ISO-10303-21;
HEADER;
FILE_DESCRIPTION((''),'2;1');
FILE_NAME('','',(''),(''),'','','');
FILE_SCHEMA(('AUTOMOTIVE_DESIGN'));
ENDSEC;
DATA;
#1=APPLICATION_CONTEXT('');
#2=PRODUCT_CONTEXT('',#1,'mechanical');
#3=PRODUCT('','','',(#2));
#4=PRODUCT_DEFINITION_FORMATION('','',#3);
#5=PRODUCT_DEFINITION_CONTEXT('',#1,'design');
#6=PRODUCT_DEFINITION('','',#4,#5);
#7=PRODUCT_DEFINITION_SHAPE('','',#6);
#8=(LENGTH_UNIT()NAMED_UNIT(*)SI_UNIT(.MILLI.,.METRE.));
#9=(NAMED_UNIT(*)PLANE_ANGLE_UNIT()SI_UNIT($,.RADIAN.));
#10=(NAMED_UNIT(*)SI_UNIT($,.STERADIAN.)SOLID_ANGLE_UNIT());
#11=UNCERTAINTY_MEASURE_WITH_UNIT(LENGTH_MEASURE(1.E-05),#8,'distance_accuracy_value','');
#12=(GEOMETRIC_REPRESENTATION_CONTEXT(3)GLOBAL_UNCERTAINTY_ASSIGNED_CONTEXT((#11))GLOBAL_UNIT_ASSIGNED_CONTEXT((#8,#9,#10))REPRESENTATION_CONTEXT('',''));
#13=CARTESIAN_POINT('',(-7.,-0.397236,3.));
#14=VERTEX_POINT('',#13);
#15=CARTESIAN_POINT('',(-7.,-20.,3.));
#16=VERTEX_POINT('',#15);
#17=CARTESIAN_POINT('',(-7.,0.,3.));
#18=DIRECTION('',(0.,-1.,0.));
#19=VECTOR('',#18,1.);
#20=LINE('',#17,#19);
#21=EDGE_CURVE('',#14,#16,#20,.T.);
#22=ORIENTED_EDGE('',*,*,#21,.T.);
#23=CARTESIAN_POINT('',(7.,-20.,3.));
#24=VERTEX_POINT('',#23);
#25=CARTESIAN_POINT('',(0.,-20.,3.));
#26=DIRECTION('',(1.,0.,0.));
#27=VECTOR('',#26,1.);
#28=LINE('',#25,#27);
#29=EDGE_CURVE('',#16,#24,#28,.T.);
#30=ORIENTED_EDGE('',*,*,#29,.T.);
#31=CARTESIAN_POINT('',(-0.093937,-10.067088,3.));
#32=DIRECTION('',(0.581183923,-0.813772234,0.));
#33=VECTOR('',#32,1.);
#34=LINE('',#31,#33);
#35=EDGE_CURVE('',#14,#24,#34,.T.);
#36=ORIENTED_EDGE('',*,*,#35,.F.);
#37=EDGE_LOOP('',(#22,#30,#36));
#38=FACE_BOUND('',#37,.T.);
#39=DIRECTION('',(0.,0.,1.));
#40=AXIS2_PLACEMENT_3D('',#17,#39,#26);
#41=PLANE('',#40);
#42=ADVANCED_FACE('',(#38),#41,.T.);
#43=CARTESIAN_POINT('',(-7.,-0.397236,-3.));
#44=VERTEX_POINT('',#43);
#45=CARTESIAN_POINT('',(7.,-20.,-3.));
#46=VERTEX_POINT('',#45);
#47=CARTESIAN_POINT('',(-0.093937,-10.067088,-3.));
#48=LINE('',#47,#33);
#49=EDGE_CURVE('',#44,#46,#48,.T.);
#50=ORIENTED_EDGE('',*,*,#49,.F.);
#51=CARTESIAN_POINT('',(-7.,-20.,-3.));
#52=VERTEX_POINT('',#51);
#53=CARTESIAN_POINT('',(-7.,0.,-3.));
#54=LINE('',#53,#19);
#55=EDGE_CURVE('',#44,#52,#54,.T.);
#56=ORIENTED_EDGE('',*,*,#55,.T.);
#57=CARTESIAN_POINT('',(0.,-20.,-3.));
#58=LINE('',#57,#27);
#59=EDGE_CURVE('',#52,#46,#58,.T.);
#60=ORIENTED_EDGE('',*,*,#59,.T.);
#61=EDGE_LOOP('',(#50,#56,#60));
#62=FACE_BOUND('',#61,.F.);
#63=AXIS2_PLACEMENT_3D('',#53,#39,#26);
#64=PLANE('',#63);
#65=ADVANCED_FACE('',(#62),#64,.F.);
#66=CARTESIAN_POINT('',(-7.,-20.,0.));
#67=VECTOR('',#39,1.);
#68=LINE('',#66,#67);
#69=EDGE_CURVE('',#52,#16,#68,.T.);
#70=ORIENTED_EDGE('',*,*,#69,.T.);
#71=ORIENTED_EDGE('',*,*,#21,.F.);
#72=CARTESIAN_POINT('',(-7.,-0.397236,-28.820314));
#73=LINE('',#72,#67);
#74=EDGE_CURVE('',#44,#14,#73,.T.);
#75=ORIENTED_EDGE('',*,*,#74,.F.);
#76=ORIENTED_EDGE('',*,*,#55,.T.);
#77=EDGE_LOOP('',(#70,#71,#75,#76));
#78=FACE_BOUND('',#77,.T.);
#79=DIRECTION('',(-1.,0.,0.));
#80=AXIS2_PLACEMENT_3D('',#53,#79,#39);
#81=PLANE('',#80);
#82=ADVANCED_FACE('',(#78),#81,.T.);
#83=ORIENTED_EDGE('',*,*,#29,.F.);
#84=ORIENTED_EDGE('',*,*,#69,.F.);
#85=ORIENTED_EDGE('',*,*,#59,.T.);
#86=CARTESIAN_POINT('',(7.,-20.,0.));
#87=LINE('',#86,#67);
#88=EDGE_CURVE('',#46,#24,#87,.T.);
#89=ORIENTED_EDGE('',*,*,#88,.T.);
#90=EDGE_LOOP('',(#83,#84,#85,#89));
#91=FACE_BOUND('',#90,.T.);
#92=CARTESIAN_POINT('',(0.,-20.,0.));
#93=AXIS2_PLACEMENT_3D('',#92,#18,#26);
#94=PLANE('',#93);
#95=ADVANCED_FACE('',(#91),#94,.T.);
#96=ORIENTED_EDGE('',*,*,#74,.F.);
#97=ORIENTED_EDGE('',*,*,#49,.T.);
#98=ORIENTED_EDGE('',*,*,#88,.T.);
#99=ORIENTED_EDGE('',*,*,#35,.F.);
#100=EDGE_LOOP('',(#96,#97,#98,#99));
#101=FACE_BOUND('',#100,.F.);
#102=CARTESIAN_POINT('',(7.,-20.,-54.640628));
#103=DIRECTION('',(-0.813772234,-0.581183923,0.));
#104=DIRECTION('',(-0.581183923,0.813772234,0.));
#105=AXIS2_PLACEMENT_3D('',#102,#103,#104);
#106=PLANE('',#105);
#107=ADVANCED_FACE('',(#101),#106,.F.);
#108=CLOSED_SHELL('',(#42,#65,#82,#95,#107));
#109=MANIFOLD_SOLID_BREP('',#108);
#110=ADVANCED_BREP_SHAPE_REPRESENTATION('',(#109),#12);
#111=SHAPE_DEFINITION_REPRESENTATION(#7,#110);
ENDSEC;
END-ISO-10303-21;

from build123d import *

# Parameters (mm, degrees)
F0_W        = 14
F0_H        = 6
F1_DEPTH    = 20
F2_T1_DEPTH = 109.2812557381


# Not quite as in the source:
# - a fillet or chamfer that OpenCascade refuses, or shapes differently, is made with other operations: its cross-section is extruded or revolved along the edge and cut away or added


with BuildPart() as f1:
    # F0 (on Front) → F1 (new body)
    with BuildSketch(Plane.XZ):
        Rectangle(F0_W, F0_H)
    extrude(amount=F1_DEPTH)

    # F2: chamfer of 14.2837 x 20 on 1 edges, made by hand

    # F2_s2 → F2_t1 (cut)
    with BuildSketch(Plane.XY.offset(-54.640627869)):
        Polygon((7, -20), (-7.2837, 0), (7, 0), align=None)
    extrude(amount=F2_T1_DEPTH, mode=Mode.SUBTRACT)


solid = f1.part
